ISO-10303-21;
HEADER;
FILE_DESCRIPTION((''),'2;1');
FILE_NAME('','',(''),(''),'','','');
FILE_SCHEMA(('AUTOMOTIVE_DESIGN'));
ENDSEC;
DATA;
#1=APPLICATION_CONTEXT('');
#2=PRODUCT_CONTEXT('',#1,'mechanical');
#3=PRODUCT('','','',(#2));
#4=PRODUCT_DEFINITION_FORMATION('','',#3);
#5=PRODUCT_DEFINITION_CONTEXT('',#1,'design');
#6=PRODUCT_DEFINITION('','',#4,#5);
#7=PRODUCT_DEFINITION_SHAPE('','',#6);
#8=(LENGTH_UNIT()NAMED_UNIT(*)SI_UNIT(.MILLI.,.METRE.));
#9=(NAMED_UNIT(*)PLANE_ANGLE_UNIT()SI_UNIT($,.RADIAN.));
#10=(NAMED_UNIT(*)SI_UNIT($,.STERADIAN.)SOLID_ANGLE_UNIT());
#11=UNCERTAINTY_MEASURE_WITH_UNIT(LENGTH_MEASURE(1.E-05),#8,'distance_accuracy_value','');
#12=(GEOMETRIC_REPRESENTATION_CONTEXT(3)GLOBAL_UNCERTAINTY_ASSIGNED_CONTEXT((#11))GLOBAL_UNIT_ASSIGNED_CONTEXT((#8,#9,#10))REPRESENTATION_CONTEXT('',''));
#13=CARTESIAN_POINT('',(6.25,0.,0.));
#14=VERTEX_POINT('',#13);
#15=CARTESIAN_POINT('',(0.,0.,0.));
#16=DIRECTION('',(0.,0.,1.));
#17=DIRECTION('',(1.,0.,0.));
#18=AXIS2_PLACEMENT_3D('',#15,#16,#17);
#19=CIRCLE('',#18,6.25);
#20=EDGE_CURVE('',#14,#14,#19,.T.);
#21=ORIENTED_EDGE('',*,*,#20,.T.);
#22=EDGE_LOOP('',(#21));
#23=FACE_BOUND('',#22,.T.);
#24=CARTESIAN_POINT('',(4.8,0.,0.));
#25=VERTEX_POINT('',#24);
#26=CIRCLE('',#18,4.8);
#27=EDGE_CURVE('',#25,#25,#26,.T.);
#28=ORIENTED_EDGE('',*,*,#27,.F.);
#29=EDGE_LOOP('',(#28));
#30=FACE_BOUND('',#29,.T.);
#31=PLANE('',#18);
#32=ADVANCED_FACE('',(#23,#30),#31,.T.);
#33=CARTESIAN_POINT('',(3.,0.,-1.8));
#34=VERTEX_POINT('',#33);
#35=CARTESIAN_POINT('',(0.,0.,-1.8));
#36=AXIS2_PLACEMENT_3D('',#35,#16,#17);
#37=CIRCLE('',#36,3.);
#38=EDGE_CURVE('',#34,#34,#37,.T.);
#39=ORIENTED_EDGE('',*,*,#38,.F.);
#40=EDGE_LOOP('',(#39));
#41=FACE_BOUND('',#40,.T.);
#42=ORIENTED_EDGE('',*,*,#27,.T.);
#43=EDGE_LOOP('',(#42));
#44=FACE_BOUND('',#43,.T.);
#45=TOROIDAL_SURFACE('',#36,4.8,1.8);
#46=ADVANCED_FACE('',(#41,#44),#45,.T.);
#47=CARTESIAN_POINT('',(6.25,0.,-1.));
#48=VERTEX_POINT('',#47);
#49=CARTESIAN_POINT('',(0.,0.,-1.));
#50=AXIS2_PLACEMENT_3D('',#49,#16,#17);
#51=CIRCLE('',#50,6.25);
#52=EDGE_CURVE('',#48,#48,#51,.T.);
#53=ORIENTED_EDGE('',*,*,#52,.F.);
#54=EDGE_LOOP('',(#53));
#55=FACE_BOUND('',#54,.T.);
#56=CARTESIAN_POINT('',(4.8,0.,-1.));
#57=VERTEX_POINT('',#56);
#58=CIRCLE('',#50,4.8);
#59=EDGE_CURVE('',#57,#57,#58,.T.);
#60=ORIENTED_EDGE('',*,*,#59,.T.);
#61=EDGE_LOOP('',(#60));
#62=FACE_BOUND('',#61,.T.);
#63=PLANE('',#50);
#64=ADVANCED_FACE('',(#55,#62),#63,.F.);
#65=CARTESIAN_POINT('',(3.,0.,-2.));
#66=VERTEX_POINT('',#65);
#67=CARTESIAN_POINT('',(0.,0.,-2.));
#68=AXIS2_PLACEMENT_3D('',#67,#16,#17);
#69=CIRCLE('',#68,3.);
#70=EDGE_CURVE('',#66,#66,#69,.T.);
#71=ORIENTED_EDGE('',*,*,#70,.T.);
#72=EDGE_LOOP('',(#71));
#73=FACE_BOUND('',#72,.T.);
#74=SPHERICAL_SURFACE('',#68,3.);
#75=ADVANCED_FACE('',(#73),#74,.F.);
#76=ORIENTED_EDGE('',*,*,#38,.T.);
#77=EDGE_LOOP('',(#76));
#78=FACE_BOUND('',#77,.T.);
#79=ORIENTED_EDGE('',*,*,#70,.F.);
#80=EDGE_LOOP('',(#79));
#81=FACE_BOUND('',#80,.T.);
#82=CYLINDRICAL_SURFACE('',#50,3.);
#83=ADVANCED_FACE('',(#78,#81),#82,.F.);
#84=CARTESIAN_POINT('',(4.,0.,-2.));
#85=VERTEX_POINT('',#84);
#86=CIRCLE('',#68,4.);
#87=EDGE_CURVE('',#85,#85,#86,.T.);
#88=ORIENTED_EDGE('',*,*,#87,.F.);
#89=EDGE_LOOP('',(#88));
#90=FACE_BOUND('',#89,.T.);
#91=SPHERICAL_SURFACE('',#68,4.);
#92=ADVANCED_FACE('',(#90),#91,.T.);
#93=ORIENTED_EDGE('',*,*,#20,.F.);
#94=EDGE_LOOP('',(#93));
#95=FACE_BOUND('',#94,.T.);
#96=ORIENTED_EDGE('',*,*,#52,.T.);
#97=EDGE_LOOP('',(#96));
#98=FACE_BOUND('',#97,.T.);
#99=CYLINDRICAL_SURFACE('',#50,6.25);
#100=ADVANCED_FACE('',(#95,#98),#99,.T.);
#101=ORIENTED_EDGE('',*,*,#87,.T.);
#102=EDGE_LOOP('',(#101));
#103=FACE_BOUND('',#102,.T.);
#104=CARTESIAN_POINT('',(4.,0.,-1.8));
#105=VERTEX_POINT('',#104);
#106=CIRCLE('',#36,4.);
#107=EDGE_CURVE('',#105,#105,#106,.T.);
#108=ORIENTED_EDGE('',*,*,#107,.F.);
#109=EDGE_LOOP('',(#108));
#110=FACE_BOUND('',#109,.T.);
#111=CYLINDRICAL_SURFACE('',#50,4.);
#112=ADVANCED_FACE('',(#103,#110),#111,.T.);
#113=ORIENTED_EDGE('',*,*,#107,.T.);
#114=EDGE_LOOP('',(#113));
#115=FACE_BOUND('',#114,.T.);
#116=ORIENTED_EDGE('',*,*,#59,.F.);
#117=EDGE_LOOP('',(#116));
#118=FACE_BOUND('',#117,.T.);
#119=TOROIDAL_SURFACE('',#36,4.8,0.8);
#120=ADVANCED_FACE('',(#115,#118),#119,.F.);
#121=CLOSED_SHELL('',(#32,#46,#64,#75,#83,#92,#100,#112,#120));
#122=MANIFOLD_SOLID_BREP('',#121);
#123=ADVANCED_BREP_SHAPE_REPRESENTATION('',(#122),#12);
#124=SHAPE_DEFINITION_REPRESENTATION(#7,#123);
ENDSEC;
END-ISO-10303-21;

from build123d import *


# Read off the part's stored shape, not the designer's step: Оболочка1
with BuildPart() as part:
    # Эскиз1 → Повернуть1 (revolve)
    with BuildSketch(Plane(origin=(0, 0, 0), x_dir=(1, 0, 0), z_dir=(0, 1, 0))):
        with BuildLine():
            Line((0, 6), (0, 1))
            Line((0, 1), (3.872983346, 1))
            ThreePointArc((3.872983346, 1), (3.968118785, 1.49598283), (4, 2))
            ThreePointArc((4, 2), (2.828427125, 4.828427125), (0, 6))
        make_face()
        with BuildLine():
            Line((3.872983346, 1), (0, 1))
            Line((0, 1), (0, 0))
            Line((0, 0), (3.464101615, 0))
            ThreePointArc((3.464101615, 0), (3.702459174, 0.486132084), (3.872983346, 1))
        make_face()
        with BuildLine():
            ThreePointArc((4, 2), (3.968118785, 1.49598283), (3.872983346, 1))
            ThreePointArc((3.872983346, 1), (3.702459174, 0.486132084), (3.464101615, 0))
            Line((3.464101615, 0), (6.25, 0))
            Line((6.25, 0), (6.25, 1))
            Line((6.25, 1), (4.8, 1))
            ThreePointArc((4.8, 1), (4.234314575, 1.234314575), (4, 1.8))
            Line((4, 1.8), (4, 2))
        make_face()
    revolve(axis=Axis((0, 0, -1), (0, 0, -1)))

    # Оболочка1 outline → Оболочка1 (revolve, cut)
    with BuildSketch(Plane.XZ):
        with BuildLine():
            ThreePointArc((3, -1.8), (3.527207794, -0.527207794), (4.8, 0))
            Line((4.8, 0), (0, 0))
            Line((0, 0), (0, -5))
            ThreePointArc((0, -5), (2.121320345, -4.121320342), (3, -1.999999997))
            Line((3, -1.999999997), (3, -1.8))
        make_face()
    revolve(axis=Axis((0, 0, 0), (0, 0, 1)), mode=Mode.SUBTRACT)


solid = part.part
